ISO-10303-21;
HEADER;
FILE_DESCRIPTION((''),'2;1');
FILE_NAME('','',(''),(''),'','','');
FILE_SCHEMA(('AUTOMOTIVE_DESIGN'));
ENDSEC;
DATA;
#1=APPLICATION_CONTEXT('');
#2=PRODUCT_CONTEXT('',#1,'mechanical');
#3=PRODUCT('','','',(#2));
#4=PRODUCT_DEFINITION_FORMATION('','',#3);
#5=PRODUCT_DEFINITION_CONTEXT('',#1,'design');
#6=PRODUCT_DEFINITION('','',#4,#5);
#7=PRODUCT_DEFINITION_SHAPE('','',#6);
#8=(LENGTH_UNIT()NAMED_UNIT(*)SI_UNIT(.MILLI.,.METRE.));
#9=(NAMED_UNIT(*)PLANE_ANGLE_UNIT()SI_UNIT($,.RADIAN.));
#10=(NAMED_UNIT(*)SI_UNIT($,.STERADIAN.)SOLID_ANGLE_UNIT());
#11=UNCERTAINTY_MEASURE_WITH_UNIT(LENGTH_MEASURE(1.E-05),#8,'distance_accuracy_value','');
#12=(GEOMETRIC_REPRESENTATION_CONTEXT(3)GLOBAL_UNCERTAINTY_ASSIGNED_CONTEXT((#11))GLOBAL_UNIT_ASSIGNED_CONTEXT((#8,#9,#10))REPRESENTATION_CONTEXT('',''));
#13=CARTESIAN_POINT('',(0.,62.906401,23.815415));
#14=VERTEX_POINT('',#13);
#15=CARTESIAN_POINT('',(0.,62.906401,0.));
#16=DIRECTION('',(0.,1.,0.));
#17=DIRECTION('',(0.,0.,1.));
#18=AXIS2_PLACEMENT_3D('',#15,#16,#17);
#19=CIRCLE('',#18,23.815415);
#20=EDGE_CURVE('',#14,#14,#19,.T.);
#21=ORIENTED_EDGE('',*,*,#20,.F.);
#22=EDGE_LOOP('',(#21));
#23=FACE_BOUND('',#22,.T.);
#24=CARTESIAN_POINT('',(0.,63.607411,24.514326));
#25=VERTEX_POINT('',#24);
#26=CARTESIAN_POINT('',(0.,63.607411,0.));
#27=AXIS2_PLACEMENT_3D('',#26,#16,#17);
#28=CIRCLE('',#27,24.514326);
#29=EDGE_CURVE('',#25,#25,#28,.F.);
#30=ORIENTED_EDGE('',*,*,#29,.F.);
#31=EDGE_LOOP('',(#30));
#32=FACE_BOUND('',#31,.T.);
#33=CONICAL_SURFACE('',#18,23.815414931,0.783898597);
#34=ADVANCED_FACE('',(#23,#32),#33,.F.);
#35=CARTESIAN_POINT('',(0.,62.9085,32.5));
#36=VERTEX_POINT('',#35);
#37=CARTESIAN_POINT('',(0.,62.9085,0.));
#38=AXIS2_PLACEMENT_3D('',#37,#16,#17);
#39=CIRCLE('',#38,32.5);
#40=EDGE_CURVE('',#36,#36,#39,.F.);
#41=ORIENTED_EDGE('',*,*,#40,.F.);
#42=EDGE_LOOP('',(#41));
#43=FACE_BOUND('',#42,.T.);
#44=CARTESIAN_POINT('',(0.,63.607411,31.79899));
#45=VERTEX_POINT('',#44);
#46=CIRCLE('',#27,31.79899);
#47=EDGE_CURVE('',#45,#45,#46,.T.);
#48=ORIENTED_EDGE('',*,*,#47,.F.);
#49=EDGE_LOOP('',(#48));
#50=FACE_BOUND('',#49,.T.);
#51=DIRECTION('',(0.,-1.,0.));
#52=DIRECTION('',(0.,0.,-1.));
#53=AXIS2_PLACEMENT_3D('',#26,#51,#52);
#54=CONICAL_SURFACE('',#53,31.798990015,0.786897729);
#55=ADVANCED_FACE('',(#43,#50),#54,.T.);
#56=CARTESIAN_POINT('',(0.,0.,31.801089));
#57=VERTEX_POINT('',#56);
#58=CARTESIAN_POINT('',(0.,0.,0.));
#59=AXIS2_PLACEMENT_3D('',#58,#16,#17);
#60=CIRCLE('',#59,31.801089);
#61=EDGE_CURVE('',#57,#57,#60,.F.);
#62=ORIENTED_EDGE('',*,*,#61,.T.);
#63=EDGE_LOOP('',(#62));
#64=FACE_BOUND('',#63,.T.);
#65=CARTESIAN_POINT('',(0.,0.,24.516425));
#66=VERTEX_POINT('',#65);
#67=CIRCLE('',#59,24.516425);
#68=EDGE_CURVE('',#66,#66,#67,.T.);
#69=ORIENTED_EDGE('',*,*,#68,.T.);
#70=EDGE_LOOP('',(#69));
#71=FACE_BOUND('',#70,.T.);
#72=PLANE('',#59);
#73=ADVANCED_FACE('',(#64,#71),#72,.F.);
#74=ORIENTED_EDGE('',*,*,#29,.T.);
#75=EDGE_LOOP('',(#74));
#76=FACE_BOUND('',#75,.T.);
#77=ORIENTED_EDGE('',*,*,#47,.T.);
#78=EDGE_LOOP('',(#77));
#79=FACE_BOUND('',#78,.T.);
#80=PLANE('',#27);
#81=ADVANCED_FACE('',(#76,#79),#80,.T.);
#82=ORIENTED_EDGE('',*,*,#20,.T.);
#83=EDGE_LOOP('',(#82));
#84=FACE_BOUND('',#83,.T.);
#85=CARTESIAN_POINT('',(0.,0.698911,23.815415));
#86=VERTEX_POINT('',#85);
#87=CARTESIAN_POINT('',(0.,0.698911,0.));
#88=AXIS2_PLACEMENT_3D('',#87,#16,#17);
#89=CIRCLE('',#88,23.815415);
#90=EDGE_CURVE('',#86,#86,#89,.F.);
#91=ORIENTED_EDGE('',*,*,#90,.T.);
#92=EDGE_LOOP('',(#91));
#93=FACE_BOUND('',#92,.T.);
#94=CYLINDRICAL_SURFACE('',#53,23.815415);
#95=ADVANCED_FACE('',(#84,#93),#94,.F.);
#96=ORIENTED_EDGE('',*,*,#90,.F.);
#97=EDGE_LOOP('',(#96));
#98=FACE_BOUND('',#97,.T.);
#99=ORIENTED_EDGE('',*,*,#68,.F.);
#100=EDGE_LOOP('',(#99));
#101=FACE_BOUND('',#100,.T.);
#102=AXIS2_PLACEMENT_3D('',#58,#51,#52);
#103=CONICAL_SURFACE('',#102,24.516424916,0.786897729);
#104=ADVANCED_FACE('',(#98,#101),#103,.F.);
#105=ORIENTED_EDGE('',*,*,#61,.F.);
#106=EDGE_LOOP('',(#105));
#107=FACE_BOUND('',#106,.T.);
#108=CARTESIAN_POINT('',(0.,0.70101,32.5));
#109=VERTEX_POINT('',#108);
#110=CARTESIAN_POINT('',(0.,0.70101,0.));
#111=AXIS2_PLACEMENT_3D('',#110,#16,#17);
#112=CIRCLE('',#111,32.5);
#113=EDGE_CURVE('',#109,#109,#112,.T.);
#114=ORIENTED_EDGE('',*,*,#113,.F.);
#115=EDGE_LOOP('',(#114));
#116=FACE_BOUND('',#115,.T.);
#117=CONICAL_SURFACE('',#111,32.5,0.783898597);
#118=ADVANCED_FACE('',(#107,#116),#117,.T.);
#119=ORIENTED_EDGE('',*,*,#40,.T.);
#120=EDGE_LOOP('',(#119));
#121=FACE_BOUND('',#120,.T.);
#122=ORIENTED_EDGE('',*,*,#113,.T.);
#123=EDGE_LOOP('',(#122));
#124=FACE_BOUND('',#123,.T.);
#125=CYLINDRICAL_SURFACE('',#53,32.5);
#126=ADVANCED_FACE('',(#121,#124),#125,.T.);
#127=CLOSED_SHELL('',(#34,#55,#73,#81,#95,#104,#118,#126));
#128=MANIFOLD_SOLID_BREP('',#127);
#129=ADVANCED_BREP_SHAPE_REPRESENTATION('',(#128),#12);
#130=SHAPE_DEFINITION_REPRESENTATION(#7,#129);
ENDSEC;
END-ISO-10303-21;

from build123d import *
from OCP.BRepFilletAPI import BRepFilletAPI_MakeChamfer

# Parameters (mm, degrees)
SKETCH1_R           = 32.5
BOSS_EXTRUDE1_DEPTH = 63.607411149
SKETCH2_R           = 23.815414931
CUT_EXTRUDE1_DEPTH  = 79.475491417
CHAMFER1_SIZE       = 0.69891071
CHAMFER1_SIZE2      = 0.701009985


with BuildPart() as part:
    # Sketch1 → Boss-Extrude1 (new body)
    with BuildSketch(Plane(origin=(0, 0, 0), x_dir=(1, 0, 0), z_dir=(0, 1, 0))):
        Circle(SKETCH1_R)
    extrude(amount=BOSS_EXTRUDE1_DEPTH)

    # Sketch2 → Cut-Extrude1 (cut, through all)
    with BuildSketch(Plane(origin=(0, 0, 0), x_dir=(1, 0, 0), z_dir=(0, 1, 0))):
        Circle(SKETCH2_R)
    extrude(amount=CUT_EXTRUDE1_DEPTH, mode=Mode.SUBTRACT)

    # Chamfer1: one chamfer whose edges measure the first distance from different faces: ONE call of the kernel's chamfer builder (chamfer() names one face for all edges)
    chamfer1_edges_1 = [part.edges().sort_by_distance(p)[0] for p in [
        (-23.815414931, 63.607411149, 0),
    ]]
    chamfer1_side_1 = [part.faces().sort_by_distance(p)[0] for p in [
        (-31.580761184, 63.607411149, 0),
    ]]
    chamfer1_edges_2 = [part.edges().sort_by_distance(p)[0] for p in [
        (-23.815414931, 0, 0),
    ]]
    chamfer1_side_2 = [part.faces().sort_by_distance(p)[0] for p in [
        (-23.815414931, 31.803705575, 0),
    ]]
    chamfer1_edges_3 = [part.edges().sort_by_distance(p)[0] for p in [
        (-32.5, 0, 0),
    ]]
    chamfer1_side_3 = [part.faces().sort_by_distance(p)[0] for p in [
        (-31.580761184, 0, 0),
    ]]
    chamfer1_edges_4 = [part.edges().sort_by_distance(p)[0] for p in [
        (-32.5, 63.607411149, 0),
    ]]
    chamfer1_side_4 = [part.faces().sort_by_distance(p)[0] for p in [
        (-32.5, 31.803705575, 0),
    ]]
    chamfer1 = BRepFilletAPI_MakeChamfer(part.part.solid().wrapped)
    for e in chamfer1_edges_1:
        chamfer1.Add(CHAMFER1_SIZE, CHAMFER1_SIZE2, e.wrapped, chamfer1_side_1[0].wrapped)  # the first distance lies on this face
    for e in chamfer1_edges_2:
        chamfer1.Add(CHAMFER1_SIZE, CHAMFER1_SIZE2, e.wrapped, chamfer1_side_2[0].wrapped)  # the first distance lies on this face
    for e in chamfer1_edges_3:
        chamfer1.Add(CHAMFER1_SIZE, CHAMFER1_SIZE2, e.wrapped, chamfer1_side_3[0].wrapped)  # the first distance lies on this face
    for e in chamfer1_edges_4:
        chamfer1.Add(CHAMFER1_SIZE, CHAMFER1_SIZE2, e.wrapped, chamfer1_side_4[0].wrapped)  # the first distance lies on this face
    add(Compound.cast(chamfer1.Shape()), mode=Mode.REPLACE)


solid = part.part
